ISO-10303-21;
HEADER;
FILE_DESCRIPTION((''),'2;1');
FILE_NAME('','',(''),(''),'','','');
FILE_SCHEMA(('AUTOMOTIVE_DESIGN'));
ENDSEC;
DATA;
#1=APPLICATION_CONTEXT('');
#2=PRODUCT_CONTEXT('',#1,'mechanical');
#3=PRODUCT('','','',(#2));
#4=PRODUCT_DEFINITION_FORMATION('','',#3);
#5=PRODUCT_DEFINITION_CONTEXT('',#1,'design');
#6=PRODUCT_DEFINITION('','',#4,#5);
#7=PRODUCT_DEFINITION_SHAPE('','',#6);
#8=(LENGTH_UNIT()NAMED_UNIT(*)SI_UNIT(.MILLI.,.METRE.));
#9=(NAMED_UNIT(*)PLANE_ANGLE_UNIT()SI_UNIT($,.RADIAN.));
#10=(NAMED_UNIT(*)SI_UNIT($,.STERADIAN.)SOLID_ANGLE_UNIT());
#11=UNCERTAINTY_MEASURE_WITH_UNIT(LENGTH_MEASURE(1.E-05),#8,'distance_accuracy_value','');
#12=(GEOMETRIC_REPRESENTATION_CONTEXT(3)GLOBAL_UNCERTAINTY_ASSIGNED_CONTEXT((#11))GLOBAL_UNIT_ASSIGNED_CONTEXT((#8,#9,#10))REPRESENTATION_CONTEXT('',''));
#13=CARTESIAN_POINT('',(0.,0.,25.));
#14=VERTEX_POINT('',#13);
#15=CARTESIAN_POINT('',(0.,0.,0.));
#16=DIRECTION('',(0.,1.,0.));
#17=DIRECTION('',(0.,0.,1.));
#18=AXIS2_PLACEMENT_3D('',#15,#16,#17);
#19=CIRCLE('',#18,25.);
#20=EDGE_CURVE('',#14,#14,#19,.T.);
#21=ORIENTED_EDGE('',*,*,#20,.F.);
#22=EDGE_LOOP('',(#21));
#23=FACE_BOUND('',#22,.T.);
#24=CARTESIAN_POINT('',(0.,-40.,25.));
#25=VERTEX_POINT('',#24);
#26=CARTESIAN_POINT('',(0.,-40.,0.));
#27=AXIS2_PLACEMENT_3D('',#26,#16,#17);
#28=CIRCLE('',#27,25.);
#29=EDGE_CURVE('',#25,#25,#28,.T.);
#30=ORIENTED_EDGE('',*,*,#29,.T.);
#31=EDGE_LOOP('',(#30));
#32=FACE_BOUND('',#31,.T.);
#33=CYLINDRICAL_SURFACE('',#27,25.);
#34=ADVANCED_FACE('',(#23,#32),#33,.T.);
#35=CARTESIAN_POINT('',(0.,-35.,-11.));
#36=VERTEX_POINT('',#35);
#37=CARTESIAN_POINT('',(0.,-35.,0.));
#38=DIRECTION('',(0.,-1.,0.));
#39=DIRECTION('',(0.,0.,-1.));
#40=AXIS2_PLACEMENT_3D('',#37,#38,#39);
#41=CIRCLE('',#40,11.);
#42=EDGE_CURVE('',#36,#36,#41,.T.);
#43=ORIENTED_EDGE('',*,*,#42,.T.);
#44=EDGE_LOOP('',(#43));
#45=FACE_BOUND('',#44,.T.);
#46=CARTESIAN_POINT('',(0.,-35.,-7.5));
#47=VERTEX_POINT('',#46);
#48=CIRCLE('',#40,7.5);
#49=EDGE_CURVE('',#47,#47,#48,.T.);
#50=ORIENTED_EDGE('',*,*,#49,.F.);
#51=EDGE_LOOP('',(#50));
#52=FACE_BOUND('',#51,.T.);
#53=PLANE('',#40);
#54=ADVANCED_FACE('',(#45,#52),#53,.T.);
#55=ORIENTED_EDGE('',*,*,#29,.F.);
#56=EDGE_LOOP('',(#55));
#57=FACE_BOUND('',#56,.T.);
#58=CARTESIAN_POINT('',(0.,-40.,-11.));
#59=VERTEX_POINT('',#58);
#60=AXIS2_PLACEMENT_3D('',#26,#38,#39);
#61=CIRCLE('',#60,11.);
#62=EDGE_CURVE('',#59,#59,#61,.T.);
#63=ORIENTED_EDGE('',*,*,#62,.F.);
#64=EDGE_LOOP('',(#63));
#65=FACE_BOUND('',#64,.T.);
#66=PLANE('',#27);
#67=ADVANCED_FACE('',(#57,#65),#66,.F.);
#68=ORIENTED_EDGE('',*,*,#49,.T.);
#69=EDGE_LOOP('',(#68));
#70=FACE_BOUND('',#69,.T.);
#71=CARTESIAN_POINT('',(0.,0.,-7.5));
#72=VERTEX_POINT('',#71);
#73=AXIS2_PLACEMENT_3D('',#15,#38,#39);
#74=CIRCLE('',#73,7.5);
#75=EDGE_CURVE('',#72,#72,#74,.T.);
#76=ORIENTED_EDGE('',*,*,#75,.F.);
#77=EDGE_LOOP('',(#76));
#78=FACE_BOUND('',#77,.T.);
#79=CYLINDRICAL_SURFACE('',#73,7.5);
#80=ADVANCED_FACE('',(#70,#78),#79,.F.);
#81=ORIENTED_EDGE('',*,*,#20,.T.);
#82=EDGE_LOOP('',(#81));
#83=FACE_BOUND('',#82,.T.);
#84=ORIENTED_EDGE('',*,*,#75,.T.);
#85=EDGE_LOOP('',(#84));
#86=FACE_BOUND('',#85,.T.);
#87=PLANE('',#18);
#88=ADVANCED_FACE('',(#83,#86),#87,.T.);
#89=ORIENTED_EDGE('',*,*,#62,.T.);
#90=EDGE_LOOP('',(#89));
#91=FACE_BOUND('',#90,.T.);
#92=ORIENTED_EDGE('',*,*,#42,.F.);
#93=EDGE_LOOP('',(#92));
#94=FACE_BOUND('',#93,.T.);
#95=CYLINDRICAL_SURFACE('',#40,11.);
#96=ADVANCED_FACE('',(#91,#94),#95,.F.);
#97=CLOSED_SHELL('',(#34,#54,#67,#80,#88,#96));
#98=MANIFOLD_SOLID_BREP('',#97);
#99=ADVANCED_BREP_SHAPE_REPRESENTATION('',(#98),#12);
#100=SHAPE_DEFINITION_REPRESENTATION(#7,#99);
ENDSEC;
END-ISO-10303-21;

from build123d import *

# Parameters (mm, degrees)
SKETCH1_R          = 25
BASE_FLANGE1_DEPTH = 40
SKETCH8_R          = 11
CUT_EXTRUDE2_DEPTH = 5
SKETCH9_R          = 7.5
CUT_EXTRUDE3_DEPTH = 50.749371855


# Sheet-metal steps are written as plain solids
with BuildPart() as part:
    # Sketch1 → Base-Flange1 (new body)
    with BuildSketch(Plane(origin=(0, 0, 0), x_dir=(1, 0, 0), z_dir=(0, 1, 0))):
        with Locations(Location((0, 0, 0), (0, 0, 270))):
            Circle(SKETCH1_R)
    extrude(amount=-BASE_FLANGE1_DEPTH)

    # Sketch8 → Cut-Extrude2 (cut)
    with BuildSketch(Plane.XZ.offset(40)):
        with Locations(Location((0, 0, 0), (0, 0, 270))):
            Circle(SKETCH8_R)
    extrude(amount=-CUT_EXTRUDE2_DEPTH, mode=Mode.SUBTRACT)

    # Sketch9 → Cut-Extrude3 (cut, through all)
    with BuildSketch(Plane.XZ.offset(35)):
        with Locations(Location((0, 0, 0), (0, 0, 270))):
            Circle(SKETCH9_R)
    extrude(amount=-CUT_EXTRUDE3_DEPTH, mode=Mode.SUBTRACT)


solid = part.part
